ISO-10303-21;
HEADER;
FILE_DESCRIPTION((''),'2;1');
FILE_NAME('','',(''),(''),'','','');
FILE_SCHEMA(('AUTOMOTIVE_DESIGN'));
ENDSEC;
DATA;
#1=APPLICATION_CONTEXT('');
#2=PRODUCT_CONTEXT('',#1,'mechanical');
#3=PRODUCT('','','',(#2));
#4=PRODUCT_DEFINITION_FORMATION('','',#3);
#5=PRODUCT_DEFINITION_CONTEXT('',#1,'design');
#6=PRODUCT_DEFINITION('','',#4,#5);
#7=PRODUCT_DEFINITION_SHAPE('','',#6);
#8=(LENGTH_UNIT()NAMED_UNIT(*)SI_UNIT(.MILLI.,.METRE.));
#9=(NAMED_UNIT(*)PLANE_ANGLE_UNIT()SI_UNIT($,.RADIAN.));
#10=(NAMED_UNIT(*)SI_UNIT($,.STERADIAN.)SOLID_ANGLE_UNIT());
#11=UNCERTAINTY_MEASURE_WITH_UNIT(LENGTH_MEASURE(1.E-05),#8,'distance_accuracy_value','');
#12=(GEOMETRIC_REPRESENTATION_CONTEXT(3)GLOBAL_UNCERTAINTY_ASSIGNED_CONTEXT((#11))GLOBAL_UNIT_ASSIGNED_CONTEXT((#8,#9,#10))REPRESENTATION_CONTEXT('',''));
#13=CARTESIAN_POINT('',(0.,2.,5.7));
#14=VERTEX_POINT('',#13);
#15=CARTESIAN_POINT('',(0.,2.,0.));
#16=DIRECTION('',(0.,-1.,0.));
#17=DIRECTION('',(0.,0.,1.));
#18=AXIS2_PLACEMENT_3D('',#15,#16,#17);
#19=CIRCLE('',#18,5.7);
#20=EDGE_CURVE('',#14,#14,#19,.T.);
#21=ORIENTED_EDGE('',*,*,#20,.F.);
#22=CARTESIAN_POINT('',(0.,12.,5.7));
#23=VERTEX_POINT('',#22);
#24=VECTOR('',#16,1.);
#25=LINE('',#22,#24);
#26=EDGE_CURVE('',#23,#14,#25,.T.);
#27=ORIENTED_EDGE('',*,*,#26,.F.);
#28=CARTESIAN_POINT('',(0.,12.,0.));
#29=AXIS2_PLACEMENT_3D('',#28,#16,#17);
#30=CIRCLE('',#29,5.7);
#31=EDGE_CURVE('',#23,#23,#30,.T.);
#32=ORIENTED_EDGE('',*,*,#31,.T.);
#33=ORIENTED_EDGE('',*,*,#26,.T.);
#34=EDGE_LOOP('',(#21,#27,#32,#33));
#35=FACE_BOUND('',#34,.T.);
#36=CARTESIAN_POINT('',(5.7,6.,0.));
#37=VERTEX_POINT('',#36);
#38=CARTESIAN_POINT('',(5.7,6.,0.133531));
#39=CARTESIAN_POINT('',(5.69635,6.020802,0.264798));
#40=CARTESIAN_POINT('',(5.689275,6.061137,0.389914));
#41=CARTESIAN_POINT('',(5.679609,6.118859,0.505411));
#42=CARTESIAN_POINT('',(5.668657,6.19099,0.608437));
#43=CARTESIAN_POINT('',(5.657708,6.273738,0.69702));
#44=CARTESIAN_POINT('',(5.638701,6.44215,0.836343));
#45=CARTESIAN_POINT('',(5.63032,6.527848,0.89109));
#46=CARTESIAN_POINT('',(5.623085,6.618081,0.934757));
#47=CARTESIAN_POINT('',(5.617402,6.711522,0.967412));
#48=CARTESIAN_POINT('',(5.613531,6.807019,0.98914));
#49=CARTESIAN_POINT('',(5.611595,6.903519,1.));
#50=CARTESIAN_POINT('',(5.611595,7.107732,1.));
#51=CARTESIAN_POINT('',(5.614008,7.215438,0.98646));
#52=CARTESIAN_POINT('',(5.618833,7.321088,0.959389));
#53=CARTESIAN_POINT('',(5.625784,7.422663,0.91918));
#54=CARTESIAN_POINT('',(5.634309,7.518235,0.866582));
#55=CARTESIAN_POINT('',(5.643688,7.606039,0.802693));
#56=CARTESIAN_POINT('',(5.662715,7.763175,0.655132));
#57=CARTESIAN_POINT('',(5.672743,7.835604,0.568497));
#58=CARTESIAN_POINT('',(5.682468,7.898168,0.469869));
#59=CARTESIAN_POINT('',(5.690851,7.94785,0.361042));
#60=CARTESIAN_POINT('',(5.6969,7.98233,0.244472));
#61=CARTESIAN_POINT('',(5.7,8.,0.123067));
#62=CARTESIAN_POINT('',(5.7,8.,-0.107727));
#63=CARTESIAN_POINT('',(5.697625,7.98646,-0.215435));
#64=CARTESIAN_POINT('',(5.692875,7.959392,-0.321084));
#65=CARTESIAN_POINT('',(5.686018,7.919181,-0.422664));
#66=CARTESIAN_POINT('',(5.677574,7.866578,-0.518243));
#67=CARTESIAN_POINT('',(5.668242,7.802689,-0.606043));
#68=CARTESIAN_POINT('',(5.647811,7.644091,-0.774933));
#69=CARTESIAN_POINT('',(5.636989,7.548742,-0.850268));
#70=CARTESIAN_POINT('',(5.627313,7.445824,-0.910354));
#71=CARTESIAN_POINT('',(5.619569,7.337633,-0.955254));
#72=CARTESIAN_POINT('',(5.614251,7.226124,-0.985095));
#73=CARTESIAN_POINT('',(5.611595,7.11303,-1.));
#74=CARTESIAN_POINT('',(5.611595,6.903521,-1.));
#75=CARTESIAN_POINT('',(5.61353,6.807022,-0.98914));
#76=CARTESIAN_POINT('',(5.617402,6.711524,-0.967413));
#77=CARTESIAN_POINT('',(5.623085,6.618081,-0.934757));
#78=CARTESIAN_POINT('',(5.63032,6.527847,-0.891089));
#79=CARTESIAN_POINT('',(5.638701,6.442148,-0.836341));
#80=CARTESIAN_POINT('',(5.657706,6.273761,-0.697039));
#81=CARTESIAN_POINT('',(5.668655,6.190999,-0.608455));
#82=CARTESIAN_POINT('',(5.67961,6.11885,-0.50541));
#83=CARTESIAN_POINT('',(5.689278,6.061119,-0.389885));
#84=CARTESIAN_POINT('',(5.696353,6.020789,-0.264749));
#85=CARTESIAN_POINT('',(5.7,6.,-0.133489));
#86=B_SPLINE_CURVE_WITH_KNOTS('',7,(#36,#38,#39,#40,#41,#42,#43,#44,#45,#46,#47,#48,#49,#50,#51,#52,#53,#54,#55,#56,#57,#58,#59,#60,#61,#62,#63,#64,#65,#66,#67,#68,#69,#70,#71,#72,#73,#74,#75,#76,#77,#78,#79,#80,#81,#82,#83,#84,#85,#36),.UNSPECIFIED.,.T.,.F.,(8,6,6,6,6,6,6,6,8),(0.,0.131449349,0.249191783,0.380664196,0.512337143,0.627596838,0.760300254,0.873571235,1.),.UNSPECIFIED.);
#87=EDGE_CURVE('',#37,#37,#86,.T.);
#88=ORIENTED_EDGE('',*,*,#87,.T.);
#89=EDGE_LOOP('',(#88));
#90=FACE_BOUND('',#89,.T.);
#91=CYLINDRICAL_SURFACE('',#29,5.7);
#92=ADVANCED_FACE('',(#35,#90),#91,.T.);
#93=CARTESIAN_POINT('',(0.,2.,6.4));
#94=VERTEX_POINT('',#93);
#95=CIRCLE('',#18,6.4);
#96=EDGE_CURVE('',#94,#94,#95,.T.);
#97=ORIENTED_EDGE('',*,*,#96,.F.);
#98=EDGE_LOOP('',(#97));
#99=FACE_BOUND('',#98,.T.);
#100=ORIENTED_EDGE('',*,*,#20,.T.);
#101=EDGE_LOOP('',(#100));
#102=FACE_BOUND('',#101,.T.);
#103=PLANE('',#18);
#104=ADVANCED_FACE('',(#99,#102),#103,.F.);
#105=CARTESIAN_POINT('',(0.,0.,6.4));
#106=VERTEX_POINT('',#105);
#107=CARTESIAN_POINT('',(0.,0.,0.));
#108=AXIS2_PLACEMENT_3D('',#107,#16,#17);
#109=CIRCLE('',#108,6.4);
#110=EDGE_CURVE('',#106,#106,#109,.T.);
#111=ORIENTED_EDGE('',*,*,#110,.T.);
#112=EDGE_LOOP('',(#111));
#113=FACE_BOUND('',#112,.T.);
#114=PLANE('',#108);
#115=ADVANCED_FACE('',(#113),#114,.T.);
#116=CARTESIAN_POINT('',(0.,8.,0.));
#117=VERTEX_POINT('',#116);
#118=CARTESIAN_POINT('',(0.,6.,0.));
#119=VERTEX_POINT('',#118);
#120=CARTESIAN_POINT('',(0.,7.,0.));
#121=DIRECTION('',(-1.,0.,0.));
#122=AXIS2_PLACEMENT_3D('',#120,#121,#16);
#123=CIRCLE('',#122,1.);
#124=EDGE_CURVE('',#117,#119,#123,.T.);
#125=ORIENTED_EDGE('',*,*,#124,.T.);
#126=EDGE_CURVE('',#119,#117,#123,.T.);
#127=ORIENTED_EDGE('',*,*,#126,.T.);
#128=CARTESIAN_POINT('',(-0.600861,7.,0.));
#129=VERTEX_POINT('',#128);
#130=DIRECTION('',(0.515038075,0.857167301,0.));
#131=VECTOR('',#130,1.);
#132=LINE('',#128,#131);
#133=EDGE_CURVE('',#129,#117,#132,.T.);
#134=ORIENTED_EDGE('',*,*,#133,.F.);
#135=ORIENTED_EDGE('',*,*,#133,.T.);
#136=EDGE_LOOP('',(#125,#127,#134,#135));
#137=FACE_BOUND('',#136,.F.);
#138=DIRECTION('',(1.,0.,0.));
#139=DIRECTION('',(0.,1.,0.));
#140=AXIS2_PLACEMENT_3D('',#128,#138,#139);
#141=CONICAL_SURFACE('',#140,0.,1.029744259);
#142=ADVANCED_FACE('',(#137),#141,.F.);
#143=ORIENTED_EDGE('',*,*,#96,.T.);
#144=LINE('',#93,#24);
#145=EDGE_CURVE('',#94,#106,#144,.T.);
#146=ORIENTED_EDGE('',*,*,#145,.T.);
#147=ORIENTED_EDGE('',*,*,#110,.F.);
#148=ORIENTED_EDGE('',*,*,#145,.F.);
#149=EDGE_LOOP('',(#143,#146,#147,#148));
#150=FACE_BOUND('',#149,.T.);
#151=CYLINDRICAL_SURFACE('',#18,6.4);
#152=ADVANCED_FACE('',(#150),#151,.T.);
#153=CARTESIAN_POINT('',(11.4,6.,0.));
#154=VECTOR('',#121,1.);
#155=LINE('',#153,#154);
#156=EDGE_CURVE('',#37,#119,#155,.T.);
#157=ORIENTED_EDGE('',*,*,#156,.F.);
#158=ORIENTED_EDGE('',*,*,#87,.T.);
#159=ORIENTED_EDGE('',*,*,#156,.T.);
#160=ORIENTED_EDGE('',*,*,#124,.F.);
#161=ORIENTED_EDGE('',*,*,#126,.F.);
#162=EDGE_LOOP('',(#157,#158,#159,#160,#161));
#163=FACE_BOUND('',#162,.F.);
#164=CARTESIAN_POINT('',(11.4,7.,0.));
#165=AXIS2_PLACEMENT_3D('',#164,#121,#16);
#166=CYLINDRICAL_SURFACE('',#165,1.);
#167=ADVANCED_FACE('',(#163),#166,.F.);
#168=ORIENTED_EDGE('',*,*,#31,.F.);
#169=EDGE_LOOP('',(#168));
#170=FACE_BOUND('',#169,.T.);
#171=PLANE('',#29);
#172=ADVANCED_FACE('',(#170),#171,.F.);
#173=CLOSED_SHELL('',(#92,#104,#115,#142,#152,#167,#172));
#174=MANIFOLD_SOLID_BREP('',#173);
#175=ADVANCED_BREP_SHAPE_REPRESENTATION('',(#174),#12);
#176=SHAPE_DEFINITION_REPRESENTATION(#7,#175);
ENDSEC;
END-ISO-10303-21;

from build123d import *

# Parameters (mm, degrees)
F6_D     = 2
F6_DEPTH = 5.7
F6_TIP   = 0.600860619


# Not quite as in the source:
# - a feature names something its author has since deleted; it is built from what else it names


with BuildPart() as f3:
    # F2 (on Right) → F3 (revolve)
    with BuildSketch(Plane.YZ):
        Polygon((0, 0), (12, 0), (12, 5.7), (2, 5.7), (2, 6.4), (0, 6.4), align=None)
    revolve(axis=Axis((0, 5.7350749573, 0), (0, -1, 0)))

    # F6
    with Locations(Plane.YZ.offset(5.7)):
        with Locations((7, 0)):
            Hole(F6_D / 2, depth=F6_DEPTH)
            with Locations((0, 0, -(F6_DEPTH + F6_TIP / 2))):  # 118° drill point
                Cone(0, F6_D / 2, F6_TIP, mode=Mode.SUBTRACT)


solid = f3.part
